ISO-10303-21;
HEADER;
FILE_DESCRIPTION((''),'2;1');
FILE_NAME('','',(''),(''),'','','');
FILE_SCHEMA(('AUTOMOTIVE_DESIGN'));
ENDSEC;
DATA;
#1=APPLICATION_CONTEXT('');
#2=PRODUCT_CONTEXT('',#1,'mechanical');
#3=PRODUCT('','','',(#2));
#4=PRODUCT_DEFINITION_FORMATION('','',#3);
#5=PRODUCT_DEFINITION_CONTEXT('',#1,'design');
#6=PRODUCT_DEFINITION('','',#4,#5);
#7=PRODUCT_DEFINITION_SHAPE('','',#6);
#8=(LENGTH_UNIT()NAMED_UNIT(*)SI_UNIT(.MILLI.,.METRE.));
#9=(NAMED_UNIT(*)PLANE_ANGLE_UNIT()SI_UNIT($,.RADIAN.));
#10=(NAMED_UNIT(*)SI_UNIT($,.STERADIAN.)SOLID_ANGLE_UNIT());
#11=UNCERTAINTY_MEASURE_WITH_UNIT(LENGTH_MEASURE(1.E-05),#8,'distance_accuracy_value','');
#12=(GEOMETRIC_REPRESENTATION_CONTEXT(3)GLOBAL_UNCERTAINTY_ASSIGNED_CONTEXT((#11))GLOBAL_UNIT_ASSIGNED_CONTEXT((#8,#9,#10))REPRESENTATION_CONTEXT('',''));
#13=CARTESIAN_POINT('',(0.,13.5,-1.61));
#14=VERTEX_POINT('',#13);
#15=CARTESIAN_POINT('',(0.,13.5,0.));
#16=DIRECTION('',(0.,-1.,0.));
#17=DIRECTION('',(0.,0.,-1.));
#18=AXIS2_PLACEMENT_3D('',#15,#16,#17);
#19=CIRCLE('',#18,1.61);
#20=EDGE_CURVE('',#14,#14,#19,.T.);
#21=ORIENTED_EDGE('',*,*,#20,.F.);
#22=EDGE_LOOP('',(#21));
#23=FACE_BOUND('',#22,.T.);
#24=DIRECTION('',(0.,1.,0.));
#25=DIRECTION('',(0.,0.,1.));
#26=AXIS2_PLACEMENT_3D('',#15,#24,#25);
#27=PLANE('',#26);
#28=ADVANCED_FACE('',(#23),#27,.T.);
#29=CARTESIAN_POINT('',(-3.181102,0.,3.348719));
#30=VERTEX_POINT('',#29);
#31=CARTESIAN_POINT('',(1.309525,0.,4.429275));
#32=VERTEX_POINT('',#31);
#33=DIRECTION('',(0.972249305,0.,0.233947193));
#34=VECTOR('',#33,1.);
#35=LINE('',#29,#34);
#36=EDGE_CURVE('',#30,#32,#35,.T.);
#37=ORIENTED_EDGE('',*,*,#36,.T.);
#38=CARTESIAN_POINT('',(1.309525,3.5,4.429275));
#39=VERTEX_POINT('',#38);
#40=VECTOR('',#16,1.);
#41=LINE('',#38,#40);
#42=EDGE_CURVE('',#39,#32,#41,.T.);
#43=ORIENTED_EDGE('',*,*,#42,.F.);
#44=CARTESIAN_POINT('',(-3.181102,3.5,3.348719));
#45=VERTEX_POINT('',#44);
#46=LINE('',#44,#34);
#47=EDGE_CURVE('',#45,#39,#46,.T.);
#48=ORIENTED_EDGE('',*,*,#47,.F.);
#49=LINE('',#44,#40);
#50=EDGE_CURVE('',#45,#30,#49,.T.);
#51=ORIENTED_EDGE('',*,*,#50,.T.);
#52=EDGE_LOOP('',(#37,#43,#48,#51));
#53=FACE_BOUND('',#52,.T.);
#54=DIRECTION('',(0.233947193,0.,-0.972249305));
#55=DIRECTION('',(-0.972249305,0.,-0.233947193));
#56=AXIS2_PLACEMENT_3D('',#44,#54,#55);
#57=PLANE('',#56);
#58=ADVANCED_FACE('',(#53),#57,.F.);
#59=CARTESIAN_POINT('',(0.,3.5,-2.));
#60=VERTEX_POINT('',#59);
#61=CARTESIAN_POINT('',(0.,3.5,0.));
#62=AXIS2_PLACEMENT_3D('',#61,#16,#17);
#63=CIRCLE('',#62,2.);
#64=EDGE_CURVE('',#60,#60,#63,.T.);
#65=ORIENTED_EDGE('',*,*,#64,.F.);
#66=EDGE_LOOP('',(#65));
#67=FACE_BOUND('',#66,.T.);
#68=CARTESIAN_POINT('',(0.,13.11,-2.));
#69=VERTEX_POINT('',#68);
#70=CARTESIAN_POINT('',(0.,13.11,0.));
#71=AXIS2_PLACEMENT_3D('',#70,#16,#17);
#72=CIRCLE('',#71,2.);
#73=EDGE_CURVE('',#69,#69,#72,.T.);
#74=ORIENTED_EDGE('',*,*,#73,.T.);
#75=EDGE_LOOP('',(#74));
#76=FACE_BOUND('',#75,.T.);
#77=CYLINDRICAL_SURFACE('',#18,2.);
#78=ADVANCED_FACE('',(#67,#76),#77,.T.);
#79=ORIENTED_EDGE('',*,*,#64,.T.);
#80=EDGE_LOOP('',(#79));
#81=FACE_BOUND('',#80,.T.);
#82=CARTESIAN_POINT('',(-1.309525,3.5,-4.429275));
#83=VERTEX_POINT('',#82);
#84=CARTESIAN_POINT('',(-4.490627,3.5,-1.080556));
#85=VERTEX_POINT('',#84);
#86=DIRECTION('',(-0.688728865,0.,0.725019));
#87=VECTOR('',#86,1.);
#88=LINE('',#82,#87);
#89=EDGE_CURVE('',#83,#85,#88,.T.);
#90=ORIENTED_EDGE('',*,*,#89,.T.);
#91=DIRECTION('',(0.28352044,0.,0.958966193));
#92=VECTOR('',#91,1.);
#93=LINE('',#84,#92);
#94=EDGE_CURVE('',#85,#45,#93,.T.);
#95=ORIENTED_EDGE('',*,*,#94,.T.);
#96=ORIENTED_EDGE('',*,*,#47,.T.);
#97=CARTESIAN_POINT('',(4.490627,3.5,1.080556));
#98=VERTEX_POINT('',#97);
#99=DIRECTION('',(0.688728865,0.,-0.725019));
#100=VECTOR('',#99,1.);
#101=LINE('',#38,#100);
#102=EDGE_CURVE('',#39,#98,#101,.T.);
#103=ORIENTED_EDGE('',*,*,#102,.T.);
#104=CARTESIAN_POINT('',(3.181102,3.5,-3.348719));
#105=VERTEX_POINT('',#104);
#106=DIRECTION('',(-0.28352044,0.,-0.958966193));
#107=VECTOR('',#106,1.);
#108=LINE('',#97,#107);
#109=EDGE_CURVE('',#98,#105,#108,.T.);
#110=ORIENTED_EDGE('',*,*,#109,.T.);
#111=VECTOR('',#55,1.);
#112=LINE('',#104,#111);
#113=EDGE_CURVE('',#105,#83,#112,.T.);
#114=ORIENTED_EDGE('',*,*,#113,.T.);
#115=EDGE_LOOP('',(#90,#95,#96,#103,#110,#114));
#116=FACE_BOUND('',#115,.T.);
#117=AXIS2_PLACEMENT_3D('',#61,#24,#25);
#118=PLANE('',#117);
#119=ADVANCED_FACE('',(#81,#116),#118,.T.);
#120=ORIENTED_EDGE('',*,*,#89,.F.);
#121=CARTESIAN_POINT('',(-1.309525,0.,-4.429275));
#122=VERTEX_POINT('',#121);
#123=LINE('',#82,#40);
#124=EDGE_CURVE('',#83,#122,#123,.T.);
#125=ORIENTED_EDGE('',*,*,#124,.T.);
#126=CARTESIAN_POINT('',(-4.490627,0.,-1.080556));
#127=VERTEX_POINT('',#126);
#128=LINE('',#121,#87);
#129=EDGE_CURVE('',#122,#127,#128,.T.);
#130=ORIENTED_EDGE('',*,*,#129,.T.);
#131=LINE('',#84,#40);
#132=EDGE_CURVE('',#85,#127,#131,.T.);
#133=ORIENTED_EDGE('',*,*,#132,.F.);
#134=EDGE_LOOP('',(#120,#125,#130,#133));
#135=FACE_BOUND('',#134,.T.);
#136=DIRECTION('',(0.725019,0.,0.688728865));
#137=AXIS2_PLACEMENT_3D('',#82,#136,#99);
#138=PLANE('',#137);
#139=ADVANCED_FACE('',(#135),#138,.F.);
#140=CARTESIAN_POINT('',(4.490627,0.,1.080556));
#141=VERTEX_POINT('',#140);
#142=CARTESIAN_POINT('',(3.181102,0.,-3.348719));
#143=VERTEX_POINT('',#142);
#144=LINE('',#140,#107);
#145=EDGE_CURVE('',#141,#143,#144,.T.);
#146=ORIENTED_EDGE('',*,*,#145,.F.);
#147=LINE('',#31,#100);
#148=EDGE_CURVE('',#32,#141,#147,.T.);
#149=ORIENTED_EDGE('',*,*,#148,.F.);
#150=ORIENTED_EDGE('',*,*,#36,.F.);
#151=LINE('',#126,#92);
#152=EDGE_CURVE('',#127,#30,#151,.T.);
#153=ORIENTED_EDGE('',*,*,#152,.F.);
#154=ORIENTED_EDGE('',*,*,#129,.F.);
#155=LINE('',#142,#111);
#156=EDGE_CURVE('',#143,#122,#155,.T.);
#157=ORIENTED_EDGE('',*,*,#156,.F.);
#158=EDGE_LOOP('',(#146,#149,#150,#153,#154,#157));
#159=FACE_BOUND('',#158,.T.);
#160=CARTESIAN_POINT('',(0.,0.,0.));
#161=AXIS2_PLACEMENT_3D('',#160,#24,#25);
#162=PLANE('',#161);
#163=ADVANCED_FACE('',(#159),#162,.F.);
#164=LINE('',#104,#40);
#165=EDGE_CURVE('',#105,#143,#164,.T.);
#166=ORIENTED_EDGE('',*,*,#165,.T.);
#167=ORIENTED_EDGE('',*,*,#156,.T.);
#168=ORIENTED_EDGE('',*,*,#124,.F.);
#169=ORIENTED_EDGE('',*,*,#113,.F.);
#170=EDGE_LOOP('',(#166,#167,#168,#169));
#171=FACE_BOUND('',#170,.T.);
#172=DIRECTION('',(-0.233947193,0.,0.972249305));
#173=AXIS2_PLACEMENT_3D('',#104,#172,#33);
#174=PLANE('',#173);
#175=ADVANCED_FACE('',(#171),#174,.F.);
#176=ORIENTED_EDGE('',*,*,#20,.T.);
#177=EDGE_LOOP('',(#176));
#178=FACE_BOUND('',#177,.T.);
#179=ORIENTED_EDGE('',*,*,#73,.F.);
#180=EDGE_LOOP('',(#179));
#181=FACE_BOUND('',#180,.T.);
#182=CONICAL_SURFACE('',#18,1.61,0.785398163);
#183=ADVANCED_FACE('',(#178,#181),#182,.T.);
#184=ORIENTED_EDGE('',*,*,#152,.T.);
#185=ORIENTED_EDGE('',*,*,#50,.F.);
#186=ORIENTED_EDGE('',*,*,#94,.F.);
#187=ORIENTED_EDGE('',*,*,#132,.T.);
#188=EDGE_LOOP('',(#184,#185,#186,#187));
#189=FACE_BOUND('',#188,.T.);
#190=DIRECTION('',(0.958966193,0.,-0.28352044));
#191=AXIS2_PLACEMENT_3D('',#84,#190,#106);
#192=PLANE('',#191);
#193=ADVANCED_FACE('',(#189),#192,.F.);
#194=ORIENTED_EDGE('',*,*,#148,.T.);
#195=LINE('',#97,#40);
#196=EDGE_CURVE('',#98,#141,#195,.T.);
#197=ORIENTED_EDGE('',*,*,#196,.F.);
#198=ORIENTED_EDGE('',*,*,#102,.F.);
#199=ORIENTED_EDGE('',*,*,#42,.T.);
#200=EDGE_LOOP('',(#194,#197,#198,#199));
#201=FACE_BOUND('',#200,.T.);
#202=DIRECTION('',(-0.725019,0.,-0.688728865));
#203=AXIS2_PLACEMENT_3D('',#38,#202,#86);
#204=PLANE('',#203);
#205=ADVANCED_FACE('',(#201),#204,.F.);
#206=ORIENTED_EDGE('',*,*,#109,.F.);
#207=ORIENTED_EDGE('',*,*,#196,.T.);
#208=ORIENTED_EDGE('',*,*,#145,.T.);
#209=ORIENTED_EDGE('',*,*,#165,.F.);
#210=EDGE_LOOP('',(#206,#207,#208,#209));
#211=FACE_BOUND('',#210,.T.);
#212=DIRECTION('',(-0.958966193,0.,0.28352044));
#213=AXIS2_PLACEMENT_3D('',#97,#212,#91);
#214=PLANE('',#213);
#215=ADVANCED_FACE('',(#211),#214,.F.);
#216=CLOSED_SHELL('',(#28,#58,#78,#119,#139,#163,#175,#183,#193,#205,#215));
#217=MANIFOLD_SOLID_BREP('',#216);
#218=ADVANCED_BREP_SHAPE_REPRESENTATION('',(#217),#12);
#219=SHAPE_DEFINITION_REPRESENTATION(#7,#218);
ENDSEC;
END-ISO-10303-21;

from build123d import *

# Parameters (mm, degrees)
EXTRUDE_1_DEPTH = 3.5
SKETCH_2_R      = 2.5
EXTRUDE_2_DEPTH = 10


# Read off the part's stored shape, not the designer's step: M4x0.7 Машинная резьба Шпилька1
with BuildPart() as part:
    # Эскиз1 → Бобышка-Вытянуть1 (new body)
    with BuildSketch(Plane(origin=(0, 0, 0), x_dir=(1, 0, 0), z_dir=(0, 1, 0))):
        Polygon((1.309524818, -4.42927512), (4.490627183, -1.080555801), (3.181102365, 3.348719319), (-1.309524818, 4.42927512), (-4.490627183, 1.080555801), (-3.181102365, -3.348719319), align=None)
    extrude(amount=EXTRUDE_1_DEPTH)

    # Эскиз2 → Бобышка-Вытянуть2 (add)
    with BuildSketch(Plane(origin=(0, 3.5, 0), x_dir=(1, 0, 0), z_dir=(0, 1, 0))):
        with Locations(Location((0, 0, 0), (0, 0, 270))):
            Circle(SKETCH_2_R)
    extrude(amount=EXTRUDE_2_DEPTH)

    # M4x0.7 Машинная резьба Шпилька1 outline → M4x0.7 Машинная резьба Шпилька1 (revolve, cut)
    with BuildSketch(Plane.XY):
        Polygon((2, 13.11), (2, 3.5), (2.5, 3.5), (2.5, 13.5), (1.61, 13.5), align=None)
    revolve(axis=Axis((0, 0, 0), (0, 1, 0)), mode=Mode.SUBTRACT)


solid = part.part
